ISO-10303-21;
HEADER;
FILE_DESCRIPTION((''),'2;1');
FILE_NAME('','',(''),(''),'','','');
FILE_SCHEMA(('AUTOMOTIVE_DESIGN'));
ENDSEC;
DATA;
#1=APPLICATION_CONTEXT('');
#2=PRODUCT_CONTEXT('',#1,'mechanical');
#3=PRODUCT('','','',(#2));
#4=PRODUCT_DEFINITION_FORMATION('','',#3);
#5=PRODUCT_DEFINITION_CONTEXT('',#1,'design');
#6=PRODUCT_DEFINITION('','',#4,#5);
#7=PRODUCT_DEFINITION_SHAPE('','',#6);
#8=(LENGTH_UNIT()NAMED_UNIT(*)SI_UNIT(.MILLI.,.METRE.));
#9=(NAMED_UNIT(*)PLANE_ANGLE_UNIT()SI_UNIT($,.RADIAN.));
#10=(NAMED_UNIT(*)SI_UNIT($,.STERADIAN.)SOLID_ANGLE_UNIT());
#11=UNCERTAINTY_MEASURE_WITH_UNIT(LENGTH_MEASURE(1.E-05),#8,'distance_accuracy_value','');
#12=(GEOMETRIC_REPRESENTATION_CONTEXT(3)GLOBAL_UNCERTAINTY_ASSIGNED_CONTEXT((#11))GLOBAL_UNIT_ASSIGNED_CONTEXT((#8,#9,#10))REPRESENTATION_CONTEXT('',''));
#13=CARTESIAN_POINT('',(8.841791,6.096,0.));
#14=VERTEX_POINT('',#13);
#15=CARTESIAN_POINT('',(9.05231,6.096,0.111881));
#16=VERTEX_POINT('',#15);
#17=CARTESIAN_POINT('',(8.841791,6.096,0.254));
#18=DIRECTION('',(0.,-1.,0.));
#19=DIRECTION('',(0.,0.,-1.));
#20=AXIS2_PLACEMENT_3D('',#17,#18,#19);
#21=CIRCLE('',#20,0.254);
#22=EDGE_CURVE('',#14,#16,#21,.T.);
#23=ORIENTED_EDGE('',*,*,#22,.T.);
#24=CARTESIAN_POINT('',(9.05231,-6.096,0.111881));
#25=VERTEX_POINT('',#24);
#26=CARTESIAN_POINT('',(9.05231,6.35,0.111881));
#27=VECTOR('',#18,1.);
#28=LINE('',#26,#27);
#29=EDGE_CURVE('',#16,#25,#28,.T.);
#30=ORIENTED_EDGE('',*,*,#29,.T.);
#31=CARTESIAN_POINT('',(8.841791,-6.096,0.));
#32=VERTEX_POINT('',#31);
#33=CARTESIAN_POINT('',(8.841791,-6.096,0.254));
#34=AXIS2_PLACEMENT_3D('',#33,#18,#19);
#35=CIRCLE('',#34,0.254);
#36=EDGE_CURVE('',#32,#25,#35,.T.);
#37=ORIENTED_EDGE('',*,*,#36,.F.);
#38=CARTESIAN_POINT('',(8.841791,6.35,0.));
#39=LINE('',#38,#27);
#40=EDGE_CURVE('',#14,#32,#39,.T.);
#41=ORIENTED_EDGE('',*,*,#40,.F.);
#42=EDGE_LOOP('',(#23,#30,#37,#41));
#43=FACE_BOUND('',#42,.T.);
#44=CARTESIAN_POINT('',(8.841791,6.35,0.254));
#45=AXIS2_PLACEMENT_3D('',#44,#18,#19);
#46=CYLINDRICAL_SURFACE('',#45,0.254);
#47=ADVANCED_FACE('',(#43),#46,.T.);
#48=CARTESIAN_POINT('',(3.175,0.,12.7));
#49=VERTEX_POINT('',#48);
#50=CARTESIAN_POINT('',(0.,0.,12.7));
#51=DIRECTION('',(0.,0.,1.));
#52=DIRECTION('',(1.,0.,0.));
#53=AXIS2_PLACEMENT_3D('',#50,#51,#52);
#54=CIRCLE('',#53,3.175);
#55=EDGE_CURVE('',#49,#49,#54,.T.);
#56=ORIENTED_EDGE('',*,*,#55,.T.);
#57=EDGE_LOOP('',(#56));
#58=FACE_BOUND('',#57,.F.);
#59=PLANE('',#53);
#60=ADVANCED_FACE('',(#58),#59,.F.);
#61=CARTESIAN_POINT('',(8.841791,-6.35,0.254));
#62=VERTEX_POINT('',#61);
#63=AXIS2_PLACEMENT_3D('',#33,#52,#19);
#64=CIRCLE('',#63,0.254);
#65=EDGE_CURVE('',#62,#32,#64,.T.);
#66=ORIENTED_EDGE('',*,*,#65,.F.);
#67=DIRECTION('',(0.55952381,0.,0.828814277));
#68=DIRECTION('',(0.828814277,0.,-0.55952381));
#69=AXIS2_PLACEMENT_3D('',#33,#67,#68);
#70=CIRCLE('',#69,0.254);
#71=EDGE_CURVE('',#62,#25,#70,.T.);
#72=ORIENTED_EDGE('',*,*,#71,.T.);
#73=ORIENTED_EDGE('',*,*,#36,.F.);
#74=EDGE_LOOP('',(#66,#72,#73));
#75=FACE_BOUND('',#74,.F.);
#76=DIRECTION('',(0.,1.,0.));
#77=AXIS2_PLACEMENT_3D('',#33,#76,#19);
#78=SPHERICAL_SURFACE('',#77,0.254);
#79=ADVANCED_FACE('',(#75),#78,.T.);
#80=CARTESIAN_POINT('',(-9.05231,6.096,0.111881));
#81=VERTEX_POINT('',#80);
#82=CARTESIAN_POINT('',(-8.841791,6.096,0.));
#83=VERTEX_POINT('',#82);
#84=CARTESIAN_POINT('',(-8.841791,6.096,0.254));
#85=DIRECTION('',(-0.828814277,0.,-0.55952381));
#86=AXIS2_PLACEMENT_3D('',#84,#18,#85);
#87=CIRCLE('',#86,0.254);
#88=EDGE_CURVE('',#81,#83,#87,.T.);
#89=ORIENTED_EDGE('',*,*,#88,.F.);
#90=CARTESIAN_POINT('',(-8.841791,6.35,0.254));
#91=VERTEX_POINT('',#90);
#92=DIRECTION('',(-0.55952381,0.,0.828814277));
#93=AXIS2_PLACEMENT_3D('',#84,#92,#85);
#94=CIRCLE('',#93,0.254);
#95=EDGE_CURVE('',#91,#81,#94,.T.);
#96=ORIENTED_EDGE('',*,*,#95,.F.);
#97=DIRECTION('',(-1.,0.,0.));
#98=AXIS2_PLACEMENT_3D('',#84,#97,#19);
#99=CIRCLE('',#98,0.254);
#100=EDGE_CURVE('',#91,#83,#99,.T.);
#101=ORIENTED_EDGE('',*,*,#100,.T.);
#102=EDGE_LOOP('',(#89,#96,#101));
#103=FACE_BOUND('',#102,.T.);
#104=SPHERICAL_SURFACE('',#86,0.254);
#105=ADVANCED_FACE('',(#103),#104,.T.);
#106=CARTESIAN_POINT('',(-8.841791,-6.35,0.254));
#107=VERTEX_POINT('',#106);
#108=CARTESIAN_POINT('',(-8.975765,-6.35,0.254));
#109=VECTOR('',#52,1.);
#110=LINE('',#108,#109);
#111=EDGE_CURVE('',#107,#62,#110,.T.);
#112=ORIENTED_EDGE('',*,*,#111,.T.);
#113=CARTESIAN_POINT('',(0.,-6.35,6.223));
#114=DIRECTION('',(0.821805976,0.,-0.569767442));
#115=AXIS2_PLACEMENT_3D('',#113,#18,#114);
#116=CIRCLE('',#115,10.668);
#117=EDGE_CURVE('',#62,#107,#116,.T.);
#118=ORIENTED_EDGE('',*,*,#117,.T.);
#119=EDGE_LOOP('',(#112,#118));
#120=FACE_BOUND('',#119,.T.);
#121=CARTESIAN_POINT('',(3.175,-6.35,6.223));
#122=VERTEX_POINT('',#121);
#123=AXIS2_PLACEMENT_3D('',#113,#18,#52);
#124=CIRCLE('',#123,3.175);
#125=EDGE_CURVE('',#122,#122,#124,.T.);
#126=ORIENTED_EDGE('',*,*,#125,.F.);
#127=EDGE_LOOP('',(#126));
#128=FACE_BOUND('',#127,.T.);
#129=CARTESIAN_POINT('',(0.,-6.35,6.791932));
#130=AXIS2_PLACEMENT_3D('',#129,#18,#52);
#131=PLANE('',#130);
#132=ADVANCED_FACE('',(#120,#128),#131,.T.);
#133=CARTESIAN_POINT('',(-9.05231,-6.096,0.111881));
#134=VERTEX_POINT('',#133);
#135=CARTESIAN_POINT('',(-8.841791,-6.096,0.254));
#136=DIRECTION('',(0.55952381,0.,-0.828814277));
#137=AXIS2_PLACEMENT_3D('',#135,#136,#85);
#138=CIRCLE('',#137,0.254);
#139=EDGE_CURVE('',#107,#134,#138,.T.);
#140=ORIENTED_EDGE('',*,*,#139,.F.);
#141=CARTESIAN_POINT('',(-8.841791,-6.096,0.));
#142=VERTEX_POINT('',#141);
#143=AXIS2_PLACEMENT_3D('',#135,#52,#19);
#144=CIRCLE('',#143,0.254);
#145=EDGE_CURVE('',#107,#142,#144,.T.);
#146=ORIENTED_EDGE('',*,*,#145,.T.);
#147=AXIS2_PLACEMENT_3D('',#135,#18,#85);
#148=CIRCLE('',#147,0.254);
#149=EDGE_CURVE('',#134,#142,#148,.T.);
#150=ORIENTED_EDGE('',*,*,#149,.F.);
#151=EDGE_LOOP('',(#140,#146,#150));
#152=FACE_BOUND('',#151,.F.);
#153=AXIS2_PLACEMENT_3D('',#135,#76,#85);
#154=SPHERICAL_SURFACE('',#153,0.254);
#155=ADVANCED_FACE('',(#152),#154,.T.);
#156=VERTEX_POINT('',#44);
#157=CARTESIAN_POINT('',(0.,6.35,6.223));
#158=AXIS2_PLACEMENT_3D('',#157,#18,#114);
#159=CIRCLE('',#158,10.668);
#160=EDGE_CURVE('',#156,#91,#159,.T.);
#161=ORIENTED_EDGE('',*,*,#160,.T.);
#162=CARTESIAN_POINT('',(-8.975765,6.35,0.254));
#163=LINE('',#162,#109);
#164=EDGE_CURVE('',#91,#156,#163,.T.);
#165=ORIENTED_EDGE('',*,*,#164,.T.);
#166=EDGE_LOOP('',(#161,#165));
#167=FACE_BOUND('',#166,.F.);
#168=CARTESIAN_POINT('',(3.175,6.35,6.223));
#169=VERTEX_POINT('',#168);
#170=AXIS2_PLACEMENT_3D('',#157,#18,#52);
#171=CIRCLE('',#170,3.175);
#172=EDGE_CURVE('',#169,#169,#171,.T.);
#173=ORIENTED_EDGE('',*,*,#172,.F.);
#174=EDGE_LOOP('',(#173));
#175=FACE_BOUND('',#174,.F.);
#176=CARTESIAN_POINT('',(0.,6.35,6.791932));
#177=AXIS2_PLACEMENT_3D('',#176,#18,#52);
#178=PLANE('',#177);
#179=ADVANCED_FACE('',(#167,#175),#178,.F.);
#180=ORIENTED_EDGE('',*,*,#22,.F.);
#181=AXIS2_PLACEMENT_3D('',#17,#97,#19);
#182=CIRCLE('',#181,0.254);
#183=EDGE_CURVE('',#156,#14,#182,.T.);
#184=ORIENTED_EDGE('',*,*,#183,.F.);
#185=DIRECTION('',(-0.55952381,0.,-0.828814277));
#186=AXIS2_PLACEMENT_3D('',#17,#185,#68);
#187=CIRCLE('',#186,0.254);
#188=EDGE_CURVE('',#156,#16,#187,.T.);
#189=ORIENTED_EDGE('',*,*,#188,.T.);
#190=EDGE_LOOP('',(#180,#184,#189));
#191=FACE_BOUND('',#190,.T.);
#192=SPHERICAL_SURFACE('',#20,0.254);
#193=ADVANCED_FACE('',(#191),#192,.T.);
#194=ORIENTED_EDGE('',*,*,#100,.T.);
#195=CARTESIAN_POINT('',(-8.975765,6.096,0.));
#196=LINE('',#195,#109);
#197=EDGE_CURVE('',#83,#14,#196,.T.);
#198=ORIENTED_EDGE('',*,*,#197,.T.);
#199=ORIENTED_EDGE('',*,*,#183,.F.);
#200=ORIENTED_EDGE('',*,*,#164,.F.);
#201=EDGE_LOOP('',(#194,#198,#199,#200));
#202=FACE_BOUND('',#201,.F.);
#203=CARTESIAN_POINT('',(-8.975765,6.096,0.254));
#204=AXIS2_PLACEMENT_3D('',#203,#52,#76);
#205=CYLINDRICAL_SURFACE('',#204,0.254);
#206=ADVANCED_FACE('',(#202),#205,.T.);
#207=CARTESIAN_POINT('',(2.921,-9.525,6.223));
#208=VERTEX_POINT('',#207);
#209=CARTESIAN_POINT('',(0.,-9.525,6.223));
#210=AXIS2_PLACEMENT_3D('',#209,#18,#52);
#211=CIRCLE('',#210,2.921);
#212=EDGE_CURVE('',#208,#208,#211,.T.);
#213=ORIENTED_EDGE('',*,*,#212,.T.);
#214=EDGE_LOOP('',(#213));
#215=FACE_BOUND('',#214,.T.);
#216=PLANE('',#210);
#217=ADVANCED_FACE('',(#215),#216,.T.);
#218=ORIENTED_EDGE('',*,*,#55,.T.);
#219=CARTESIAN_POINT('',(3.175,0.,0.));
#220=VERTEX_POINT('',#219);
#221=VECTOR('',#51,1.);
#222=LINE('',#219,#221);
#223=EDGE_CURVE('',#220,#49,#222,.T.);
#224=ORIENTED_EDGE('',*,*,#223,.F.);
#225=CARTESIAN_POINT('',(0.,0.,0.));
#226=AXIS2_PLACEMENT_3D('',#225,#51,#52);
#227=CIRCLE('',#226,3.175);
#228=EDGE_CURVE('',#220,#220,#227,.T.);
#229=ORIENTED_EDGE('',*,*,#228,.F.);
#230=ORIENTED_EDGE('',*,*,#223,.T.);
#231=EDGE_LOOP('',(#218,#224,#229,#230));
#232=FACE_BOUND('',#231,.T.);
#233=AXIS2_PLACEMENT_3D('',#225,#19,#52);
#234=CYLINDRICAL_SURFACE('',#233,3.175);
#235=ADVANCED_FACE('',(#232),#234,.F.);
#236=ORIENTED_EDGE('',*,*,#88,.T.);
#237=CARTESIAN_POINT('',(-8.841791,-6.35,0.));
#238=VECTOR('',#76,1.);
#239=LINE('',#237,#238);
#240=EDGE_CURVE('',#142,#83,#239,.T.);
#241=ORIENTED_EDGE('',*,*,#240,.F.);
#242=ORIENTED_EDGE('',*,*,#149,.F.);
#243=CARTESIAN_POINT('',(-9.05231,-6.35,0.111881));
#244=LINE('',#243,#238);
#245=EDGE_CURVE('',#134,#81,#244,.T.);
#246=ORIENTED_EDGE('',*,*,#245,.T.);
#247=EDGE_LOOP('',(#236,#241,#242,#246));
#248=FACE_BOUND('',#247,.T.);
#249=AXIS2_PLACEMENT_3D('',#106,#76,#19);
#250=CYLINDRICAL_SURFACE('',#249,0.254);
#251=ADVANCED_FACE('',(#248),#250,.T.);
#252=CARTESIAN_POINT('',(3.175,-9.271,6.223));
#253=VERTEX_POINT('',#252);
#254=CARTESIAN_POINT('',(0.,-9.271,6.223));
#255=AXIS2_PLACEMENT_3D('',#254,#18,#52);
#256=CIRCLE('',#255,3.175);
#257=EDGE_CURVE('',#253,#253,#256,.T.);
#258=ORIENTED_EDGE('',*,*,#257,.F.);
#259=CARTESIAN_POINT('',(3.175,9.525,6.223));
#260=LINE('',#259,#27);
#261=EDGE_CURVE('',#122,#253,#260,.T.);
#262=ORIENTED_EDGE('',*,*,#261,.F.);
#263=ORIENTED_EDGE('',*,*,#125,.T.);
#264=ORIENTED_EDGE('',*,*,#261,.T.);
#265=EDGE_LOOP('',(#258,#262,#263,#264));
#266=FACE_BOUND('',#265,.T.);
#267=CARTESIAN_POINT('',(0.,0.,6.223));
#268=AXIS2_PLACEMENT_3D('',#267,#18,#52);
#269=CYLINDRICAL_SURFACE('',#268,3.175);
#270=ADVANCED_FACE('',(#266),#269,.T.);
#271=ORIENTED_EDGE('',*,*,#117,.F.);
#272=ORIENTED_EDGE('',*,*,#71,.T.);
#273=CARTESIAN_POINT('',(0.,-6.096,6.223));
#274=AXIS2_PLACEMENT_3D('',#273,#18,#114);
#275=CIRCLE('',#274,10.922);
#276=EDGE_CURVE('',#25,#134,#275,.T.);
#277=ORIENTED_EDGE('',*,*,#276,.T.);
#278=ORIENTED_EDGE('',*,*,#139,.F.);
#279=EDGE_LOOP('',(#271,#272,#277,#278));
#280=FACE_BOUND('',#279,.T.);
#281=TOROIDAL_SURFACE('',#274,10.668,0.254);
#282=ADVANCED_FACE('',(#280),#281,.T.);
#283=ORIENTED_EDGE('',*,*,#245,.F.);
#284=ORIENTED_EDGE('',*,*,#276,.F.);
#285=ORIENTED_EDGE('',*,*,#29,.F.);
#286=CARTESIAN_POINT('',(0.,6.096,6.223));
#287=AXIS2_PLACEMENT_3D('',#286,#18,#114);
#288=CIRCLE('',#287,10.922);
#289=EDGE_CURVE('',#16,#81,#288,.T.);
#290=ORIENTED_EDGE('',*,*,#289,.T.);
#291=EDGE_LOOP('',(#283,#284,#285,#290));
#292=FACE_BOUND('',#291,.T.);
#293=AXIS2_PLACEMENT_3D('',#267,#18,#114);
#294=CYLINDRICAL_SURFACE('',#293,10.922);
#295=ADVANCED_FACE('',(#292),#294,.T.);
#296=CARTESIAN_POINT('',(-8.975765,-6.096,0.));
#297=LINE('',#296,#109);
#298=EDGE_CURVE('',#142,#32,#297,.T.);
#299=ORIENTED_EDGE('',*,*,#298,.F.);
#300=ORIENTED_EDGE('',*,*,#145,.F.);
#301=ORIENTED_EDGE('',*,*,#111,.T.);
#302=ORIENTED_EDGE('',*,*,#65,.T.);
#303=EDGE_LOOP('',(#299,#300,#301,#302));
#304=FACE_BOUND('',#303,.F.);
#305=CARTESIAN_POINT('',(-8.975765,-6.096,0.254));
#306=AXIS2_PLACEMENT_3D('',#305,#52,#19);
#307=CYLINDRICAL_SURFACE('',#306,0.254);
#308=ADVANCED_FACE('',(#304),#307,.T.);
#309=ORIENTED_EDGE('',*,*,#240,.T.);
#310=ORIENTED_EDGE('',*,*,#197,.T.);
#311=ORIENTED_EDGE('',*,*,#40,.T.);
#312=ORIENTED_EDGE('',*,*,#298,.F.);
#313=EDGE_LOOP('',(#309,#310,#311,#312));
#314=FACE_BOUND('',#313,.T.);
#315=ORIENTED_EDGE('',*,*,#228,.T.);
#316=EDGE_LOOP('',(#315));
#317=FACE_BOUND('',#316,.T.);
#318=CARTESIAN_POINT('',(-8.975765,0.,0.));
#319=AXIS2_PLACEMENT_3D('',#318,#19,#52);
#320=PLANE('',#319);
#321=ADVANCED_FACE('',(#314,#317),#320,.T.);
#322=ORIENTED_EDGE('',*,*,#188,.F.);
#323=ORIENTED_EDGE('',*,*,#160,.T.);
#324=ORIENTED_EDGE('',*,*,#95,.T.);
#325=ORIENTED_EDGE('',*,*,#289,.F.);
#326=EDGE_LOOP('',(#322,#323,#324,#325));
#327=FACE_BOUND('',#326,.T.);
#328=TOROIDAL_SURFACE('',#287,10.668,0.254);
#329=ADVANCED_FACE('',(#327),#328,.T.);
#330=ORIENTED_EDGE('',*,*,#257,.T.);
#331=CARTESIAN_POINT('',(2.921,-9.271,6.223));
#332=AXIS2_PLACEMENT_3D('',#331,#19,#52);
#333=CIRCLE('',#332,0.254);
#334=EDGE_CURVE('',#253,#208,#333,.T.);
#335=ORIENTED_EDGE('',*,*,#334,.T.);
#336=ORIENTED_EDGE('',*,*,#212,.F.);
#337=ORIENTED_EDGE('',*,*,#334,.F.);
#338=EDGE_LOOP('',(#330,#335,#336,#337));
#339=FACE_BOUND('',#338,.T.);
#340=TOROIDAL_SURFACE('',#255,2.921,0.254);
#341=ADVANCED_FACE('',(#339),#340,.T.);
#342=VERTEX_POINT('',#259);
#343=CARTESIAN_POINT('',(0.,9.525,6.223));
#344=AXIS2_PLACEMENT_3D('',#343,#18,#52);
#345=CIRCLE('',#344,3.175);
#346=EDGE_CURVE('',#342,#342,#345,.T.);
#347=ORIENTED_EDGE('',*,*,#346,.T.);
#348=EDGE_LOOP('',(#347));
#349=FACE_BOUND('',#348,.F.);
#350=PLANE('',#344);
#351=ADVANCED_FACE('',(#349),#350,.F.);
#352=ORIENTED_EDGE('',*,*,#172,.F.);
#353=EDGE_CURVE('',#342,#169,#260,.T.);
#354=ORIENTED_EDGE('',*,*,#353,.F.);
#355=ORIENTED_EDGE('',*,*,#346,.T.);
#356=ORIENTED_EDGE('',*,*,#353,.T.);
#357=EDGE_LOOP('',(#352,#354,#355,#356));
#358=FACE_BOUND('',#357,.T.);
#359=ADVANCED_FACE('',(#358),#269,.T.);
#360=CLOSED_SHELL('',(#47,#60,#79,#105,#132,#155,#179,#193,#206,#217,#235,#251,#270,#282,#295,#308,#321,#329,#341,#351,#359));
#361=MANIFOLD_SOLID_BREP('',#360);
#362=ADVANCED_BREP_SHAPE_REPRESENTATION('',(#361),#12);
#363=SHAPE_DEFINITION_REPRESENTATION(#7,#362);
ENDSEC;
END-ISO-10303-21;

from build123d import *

# Parameters (mm, degrees)
F3_DEPTH = 6.35
F1_R     = 3.175
F4_DEPTH = 9.525
F2_R     = 3.175
F5_DEPTH = 12.7
F6_R     = 0.254


with BuildPart() as f3:
    # F0 (on Front) → F3 (new body, symmetric)
    with BuildSketch(Plane.XZ):
        with BuildLine():
            Line((-8.9757648699, 0), (8.9757648699, 0))
            ThreePointArc((8.9757648699, 0), (0, 17.145), (-8.9757648699, 0))
        make_face()
    extrude(amount=F3_DEPTH, both=True)

    # F1 (on Front) → F4 (join, symmetric)
    with BuildSketch(Plane.XZ):
        with Locations((0, 6.223)):
            Circle(F1_R)
    extrude(amount=F4_DEPTH, both=True)

    # F2 (on Top) → F5 (cut)
    with BuildSketch(Plane.XY):
        Circle(F2_R)
    extrude(amount=F5_DEPTH, mode=Mode.SUBTRACT)

    # F6
    f6_edges = [f3.edges().sort_by_distance(p)[0] for p in [
        (0, -6.35, 17.145),
        (0, 6.35, 17.145),
        (8.975765, 0, 0),
        (0, -6.35, 0),
        (-3.175, -9.525, 6.223),
        (0, 6.35, 0),
        (-8.975765, 0, 0),
    ]]
    fillet(f6_edges, radius=F6_R)


solid = f3.part
